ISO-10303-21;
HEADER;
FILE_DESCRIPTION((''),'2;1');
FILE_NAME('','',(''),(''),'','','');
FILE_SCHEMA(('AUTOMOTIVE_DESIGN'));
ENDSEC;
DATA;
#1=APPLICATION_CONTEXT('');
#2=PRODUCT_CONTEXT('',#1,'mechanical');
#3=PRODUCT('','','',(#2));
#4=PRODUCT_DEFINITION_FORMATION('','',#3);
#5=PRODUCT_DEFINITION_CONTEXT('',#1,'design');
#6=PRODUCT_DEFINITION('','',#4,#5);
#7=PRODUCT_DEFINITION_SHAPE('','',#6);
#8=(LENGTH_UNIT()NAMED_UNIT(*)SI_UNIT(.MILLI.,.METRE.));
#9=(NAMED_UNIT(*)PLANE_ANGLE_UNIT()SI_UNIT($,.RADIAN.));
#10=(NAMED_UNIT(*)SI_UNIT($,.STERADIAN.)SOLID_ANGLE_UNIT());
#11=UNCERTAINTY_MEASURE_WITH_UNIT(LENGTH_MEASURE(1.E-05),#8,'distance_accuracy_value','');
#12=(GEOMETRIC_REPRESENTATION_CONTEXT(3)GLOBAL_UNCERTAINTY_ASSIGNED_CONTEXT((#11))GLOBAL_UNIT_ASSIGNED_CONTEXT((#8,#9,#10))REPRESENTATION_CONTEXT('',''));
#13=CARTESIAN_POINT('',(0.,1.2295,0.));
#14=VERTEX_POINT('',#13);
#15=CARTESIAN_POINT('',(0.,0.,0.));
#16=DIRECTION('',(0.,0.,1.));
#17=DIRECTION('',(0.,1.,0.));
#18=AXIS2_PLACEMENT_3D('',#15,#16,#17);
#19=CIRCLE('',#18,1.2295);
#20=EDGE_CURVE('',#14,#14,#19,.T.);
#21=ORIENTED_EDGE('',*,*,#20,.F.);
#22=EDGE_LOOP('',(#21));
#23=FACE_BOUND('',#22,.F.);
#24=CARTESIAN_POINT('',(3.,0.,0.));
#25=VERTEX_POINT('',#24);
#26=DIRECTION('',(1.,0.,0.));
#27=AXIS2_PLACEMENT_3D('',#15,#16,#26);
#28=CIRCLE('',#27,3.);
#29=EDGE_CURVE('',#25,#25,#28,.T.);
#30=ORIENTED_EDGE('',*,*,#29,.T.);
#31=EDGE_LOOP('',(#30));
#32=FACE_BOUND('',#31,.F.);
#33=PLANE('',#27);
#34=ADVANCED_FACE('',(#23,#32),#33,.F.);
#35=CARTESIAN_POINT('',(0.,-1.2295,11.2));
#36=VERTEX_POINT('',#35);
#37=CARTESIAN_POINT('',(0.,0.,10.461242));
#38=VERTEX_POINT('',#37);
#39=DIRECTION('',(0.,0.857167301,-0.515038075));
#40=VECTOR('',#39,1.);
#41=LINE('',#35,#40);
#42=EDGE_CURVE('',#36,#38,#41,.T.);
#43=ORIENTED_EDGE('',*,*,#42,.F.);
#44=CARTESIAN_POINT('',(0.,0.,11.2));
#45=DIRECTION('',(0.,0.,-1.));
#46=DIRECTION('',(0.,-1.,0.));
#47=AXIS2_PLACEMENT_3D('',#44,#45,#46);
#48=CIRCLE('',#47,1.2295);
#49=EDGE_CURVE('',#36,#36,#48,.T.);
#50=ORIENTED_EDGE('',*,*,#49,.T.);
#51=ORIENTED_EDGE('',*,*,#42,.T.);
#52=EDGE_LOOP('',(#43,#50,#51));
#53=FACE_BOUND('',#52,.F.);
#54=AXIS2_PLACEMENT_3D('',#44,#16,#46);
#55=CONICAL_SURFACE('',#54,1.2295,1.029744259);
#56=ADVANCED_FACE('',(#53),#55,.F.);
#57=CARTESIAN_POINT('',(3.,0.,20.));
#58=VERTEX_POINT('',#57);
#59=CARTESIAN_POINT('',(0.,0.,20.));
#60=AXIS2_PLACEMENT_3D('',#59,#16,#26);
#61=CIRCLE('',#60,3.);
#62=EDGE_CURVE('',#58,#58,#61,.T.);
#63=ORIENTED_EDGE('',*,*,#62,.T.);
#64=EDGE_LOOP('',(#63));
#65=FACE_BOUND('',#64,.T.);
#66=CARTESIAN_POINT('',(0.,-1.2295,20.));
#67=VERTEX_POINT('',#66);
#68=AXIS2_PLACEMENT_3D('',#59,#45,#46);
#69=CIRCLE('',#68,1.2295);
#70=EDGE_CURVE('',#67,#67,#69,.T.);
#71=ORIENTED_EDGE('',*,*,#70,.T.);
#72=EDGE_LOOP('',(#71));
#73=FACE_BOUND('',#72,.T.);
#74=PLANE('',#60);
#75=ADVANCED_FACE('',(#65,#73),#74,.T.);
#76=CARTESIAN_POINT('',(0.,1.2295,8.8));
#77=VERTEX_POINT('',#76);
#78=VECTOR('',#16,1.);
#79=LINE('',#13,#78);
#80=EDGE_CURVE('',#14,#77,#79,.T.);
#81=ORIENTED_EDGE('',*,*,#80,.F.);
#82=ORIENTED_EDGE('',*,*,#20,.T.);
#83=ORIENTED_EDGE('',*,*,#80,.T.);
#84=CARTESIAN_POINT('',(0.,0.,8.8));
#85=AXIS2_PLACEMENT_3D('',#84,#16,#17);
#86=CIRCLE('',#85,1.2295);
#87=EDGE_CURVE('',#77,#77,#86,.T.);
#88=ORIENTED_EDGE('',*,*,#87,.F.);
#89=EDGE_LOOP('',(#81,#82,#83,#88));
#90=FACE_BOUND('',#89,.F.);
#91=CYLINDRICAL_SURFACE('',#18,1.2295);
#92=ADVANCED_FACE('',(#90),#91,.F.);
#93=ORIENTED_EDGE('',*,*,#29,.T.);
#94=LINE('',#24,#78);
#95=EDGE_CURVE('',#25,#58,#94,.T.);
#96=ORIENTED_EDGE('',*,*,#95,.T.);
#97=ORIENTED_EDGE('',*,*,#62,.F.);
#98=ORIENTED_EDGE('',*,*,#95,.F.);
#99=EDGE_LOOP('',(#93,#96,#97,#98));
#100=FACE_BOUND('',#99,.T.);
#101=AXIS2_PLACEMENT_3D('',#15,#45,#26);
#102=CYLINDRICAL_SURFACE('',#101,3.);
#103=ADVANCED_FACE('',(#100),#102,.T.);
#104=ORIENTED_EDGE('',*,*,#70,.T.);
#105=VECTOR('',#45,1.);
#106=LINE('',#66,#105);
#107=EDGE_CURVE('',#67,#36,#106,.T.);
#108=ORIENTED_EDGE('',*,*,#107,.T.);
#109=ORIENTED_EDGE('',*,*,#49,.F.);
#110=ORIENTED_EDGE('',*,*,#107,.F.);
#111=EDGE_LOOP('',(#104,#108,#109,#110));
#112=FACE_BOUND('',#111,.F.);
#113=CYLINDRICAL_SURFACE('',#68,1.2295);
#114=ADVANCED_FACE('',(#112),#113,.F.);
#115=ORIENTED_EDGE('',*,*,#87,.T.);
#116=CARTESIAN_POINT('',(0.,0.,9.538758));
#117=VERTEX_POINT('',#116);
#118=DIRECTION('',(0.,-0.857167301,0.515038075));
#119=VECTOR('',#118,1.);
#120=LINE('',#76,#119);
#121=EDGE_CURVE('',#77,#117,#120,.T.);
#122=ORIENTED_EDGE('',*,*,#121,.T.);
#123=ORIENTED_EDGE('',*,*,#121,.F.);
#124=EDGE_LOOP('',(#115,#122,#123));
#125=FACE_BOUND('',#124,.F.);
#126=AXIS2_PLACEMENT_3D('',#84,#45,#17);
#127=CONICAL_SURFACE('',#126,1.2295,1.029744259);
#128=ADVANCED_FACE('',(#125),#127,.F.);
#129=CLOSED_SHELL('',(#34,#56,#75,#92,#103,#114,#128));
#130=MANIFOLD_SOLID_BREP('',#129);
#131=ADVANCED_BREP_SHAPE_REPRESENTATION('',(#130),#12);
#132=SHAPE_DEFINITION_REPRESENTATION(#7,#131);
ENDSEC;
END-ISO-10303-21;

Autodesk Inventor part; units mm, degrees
ref_plane "YZ Plane" through (0, 0, 0) normal (1, 0, 0) x (0, 1, 0)
ref_plane "XZ Plane" through (0, 0, 0) normal (0, 1, 0) x (-1, 0, 0)
ref_plane "XY Plane" through (0, 0, 0) normal (0, 0, 1) x (1, 0, 0)
sketch "スケッチ1" plane through (0, 0, 0) normal (0, 0, 1) x (1, 0, 0)
  circle A0 centre (0, 0) radius 3
  dimension "d0" = 6
extrude "押し出し1" add sketch "スケッチ1" along normal blind 20
sketch "スケッチ2" plane through (0, 0, 20) normal (0, 0, 1) x (1, 0, 0)
  point P0 (0, 0)
  point P1 (0, 0)
hole "穴1" at (0, 0, 20) direction (0, 0, -1) diameter 2.459 depth 8.8 tip angle 118 thread size "M3x0.5" class "6H" standard "ISO Metric profile"
sketch "スケッチ3" plane through (0, 0, 0) normal (0, 0, -1) x (-1, 0, 0)
  circle A0 centre (0, 0) radius 1.2295 projected
hole "穴2" at (0, 0, 0) direction (0, 0, 1) diameter 2.459 depth 8.8 tip angle 118 thread size "M3x0.5" class "6H" standard "ISO Metric profile"
properties part number "base_part1" material "アルミニウム 6061"
